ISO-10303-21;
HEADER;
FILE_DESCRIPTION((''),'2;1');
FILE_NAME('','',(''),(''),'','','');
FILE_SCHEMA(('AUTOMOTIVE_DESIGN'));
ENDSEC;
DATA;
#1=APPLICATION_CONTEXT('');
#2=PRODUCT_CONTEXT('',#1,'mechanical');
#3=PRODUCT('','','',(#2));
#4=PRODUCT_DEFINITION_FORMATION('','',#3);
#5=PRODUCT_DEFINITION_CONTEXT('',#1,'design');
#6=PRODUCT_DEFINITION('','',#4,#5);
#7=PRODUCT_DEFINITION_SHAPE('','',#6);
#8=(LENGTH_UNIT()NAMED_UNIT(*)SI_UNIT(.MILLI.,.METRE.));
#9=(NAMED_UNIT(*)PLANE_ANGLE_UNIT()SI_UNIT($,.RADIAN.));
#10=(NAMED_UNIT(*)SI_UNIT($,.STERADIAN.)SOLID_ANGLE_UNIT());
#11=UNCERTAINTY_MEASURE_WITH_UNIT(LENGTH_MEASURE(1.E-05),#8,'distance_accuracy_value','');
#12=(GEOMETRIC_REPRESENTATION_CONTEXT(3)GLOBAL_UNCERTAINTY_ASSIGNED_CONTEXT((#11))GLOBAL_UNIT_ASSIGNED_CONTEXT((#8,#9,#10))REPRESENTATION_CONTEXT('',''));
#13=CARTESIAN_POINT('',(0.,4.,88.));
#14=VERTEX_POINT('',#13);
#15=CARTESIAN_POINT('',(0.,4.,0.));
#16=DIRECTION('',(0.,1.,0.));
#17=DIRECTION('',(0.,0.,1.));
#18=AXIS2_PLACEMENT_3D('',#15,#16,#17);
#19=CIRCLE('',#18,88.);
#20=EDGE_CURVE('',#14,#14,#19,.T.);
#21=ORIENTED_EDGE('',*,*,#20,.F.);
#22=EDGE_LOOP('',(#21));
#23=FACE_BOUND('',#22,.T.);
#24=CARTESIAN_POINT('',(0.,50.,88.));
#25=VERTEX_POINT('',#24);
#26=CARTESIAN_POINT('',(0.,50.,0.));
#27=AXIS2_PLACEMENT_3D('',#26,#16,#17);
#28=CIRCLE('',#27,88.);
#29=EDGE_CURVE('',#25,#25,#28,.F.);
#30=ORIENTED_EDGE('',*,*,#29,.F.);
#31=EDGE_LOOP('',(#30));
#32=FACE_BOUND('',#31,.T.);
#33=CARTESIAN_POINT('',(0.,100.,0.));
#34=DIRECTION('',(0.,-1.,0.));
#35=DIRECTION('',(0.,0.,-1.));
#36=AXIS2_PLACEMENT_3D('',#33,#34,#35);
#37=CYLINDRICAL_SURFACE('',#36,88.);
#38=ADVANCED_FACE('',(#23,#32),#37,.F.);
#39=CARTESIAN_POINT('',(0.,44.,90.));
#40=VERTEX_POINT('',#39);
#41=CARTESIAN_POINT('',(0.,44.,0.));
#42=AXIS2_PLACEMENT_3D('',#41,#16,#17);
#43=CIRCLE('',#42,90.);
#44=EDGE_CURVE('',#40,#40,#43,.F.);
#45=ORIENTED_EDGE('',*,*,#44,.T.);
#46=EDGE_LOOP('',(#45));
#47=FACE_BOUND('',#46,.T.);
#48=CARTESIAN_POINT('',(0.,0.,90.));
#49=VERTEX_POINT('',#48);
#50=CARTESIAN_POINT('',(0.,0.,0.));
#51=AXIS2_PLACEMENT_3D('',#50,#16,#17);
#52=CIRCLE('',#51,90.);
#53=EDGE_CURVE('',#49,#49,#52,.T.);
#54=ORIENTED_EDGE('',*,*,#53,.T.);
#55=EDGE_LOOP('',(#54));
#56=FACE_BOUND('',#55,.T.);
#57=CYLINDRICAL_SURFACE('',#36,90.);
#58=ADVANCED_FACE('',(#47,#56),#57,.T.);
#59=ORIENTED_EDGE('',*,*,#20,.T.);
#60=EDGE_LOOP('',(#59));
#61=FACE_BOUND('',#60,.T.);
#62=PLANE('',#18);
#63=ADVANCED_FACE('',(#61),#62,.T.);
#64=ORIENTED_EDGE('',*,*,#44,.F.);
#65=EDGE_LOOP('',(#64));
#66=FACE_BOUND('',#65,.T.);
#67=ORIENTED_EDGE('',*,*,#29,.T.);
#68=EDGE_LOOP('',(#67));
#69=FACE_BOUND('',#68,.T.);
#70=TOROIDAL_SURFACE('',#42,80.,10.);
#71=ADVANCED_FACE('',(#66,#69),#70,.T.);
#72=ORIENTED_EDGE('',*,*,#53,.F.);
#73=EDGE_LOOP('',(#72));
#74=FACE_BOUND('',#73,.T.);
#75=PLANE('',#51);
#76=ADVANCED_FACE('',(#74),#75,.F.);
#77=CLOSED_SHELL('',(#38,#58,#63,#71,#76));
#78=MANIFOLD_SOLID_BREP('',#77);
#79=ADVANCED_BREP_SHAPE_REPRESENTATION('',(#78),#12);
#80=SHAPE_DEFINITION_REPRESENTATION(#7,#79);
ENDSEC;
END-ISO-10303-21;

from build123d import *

# Parameters (mm, degrees)
SKETCH2_R           = 90
SKETCH1_R           = 90
SHELL1_T            = -2
CUT_EXTRUDE1_START  = -50
SKETCH4_R           = 90
CUT_EXTRUDE1_DEPTH  = 50
FILLET1_R           = 10
SKETCH5_R           = 88
BOSS_EXTRUDE1_DEPTH = 2


with BuildPart() as part:
    # Sketch2 → Loft1 section 0
    with BuildSketch(Plane(origin=(0, 100, 0), x_dir=(1, 0, 0), z_dir=(0, 1, 0))):
        Circle(SKETCH2_R)
    # Sketch1 → Loft1 section 1
    with BuildSketch(Plane(origin=(0, 0, 0), x_dir=(1, 0, 0), z_dir=(0, 1, 0))):
        Circle(SKETCH1_R)
    loft()

    # Shell1
    shell1_openings = [part.faces().sort_by_distance(p)[0] for p in [
        (0, 100, 0),
    ]]
    offset(amount=SHELL1_T, openings=shell1_openings, kind=Kind.INTERSECTION)

    # Sketch4 → Cut-Extrude1 (cut)
    with BuildSketch(Plane(origin=(0, 100, 0), x_dir=(1, 0, 0), z_dir=(0, 1, 0)).offset(CUT_EXTRUDE1_START)):
        with Locations(Location((0, 0, 0), (0, 0, 270))):
            Circle(SKETCH4_R)
    extrude(amount=CUT_EXTRUDE1_DEPTH, mode=Mode.SUBTRACT)

    # Fillet1
    # the kernel refuses this fillet: 10 mm, written as the material it takes off along each edge
    with BuildSketch(Plane(origin=(0, 50, 0), x_dir=(1, 0, 0), z_dir=(0, 0, -1))) as fillet1_piece_1:
        with BuildLine():
            CenterArc((80, 6), FILLET1_R, 323.130102354, 36.869897646)
            Line((88, 0), (88.16, -0.12))
            ThreePointArc((88.16, -0.12), (89, -0.2), (90, -0.2))
            Line((90, -0.2), (90.2, 0))
            Line((90.2, 0), (90.2, 6))
            Line((90.2, 6), (90, 6))
        make_face()
    revolve(axis=Axis((0, 50, 0), (0, -1, 0)), mode=Mode.SUBTRACT)

    # Sketch5 → Boss-Extrude1 (add)
    with BuildSketch(Plane(origin=(0, 2, 0), x_dir=(1, 0, 0), z_dir=(0, 1, 0))):
        with Locations(Location((0, 0, 0), (0, 0, 270))):
            Circle(SKETCH5_R)
    extrude(amount=BOSS_EXTRUDE1_DEPTH)


solid = part.part
